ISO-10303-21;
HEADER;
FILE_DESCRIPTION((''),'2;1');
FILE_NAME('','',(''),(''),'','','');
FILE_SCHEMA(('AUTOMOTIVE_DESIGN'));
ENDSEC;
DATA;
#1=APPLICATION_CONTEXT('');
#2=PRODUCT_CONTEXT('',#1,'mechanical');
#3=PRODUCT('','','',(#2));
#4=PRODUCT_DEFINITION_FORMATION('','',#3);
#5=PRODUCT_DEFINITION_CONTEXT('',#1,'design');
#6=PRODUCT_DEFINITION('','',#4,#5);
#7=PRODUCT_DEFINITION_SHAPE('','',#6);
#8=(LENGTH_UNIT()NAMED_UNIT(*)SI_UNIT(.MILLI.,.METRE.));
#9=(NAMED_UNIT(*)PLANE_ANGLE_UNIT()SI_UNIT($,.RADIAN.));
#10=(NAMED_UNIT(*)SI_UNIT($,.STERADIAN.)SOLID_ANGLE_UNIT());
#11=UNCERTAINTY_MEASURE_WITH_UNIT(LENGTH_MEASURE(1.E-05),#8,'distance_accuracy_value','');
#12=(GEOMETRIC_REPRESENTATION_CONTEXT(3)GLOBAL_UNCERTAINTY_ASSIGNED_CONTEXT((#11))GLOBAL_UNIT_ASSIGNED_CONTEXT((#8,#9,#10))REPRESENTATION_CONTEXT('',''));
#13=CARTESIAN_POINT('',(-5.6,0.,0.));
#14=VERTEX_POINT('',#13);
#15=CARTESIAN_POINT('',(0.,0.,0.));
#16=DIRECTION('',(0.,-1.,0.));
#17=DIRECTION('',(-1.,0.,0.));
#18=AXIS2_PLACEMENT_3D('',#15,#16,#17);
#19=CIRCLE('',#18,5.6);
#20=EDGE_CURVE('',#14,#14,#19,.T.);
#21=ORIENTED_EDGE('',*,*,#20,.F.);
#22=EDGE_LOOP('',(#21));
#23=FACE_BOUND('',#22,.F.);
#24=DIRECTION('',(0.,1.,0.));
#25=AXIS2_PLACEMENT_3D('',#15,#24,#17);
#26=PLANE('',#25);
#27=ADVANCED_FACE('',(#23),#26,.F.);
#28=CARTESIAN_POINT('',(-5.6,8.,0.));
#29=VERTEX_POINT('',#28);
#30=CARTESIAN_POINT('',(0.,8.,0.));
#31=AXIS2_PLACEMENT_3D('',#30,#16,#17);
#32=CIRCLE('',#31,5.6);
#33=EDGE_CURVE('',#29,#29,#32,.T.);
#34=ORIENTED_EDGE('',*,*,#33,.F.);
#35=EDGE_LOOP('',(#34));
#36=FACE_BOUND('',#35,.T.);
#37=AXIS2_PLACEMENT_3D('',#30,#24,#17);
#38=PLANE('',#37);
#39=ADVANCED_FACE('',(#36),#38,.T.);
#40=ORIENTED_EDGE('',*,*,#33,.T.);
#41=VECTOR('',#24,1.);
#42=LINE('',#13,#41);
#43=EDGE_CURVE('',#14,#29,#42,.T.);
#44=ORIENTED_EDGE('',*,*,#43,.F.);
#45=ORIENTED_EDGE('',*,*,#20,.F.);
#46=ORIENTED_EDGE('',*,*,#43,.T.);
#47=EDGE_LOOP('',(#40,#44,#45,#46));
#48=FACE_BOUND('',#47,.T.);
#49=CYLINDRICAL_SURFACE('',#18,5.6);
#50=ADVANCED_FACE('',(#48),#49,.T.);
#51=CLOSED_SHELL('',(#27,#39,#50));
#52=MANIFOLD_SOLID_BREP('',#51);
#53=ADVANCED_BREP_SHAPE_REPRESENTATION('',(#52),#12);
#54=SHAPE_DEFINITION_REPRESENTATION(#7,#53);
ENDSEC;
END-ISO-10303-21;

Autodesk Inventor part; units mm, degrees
ref_plane "YZ Plane" through (0, 0, 0) normal (1, 0, 0) x (0, 1, 0)
ref_plane "XZ Plane" through (0, 0, 0) normal (0, 1, 0) x (-1, 0, 0)
ref_plane "XY Plane" through (0, 0, 0) normal (0, 0, 1) x (1, 0, 0)
sketch "Sketch1" plane through (0, 0, 0) normal (0, 1, 0) x (-1, 0, 0)
  circle A0 centre (0, 0) radius 6
  dimension "d0" = 12
extrude "Extrusion1" add sketch "Sketch1" along normal blind 8
thicken "Thicken1" operation add thickness 0.4 both sides no extend neighbours yes toward (0.9967573, 0, 0.0804666) faces at (-5.9805, 5.3333, -0.4828)
properties part number "SpringRod2"
